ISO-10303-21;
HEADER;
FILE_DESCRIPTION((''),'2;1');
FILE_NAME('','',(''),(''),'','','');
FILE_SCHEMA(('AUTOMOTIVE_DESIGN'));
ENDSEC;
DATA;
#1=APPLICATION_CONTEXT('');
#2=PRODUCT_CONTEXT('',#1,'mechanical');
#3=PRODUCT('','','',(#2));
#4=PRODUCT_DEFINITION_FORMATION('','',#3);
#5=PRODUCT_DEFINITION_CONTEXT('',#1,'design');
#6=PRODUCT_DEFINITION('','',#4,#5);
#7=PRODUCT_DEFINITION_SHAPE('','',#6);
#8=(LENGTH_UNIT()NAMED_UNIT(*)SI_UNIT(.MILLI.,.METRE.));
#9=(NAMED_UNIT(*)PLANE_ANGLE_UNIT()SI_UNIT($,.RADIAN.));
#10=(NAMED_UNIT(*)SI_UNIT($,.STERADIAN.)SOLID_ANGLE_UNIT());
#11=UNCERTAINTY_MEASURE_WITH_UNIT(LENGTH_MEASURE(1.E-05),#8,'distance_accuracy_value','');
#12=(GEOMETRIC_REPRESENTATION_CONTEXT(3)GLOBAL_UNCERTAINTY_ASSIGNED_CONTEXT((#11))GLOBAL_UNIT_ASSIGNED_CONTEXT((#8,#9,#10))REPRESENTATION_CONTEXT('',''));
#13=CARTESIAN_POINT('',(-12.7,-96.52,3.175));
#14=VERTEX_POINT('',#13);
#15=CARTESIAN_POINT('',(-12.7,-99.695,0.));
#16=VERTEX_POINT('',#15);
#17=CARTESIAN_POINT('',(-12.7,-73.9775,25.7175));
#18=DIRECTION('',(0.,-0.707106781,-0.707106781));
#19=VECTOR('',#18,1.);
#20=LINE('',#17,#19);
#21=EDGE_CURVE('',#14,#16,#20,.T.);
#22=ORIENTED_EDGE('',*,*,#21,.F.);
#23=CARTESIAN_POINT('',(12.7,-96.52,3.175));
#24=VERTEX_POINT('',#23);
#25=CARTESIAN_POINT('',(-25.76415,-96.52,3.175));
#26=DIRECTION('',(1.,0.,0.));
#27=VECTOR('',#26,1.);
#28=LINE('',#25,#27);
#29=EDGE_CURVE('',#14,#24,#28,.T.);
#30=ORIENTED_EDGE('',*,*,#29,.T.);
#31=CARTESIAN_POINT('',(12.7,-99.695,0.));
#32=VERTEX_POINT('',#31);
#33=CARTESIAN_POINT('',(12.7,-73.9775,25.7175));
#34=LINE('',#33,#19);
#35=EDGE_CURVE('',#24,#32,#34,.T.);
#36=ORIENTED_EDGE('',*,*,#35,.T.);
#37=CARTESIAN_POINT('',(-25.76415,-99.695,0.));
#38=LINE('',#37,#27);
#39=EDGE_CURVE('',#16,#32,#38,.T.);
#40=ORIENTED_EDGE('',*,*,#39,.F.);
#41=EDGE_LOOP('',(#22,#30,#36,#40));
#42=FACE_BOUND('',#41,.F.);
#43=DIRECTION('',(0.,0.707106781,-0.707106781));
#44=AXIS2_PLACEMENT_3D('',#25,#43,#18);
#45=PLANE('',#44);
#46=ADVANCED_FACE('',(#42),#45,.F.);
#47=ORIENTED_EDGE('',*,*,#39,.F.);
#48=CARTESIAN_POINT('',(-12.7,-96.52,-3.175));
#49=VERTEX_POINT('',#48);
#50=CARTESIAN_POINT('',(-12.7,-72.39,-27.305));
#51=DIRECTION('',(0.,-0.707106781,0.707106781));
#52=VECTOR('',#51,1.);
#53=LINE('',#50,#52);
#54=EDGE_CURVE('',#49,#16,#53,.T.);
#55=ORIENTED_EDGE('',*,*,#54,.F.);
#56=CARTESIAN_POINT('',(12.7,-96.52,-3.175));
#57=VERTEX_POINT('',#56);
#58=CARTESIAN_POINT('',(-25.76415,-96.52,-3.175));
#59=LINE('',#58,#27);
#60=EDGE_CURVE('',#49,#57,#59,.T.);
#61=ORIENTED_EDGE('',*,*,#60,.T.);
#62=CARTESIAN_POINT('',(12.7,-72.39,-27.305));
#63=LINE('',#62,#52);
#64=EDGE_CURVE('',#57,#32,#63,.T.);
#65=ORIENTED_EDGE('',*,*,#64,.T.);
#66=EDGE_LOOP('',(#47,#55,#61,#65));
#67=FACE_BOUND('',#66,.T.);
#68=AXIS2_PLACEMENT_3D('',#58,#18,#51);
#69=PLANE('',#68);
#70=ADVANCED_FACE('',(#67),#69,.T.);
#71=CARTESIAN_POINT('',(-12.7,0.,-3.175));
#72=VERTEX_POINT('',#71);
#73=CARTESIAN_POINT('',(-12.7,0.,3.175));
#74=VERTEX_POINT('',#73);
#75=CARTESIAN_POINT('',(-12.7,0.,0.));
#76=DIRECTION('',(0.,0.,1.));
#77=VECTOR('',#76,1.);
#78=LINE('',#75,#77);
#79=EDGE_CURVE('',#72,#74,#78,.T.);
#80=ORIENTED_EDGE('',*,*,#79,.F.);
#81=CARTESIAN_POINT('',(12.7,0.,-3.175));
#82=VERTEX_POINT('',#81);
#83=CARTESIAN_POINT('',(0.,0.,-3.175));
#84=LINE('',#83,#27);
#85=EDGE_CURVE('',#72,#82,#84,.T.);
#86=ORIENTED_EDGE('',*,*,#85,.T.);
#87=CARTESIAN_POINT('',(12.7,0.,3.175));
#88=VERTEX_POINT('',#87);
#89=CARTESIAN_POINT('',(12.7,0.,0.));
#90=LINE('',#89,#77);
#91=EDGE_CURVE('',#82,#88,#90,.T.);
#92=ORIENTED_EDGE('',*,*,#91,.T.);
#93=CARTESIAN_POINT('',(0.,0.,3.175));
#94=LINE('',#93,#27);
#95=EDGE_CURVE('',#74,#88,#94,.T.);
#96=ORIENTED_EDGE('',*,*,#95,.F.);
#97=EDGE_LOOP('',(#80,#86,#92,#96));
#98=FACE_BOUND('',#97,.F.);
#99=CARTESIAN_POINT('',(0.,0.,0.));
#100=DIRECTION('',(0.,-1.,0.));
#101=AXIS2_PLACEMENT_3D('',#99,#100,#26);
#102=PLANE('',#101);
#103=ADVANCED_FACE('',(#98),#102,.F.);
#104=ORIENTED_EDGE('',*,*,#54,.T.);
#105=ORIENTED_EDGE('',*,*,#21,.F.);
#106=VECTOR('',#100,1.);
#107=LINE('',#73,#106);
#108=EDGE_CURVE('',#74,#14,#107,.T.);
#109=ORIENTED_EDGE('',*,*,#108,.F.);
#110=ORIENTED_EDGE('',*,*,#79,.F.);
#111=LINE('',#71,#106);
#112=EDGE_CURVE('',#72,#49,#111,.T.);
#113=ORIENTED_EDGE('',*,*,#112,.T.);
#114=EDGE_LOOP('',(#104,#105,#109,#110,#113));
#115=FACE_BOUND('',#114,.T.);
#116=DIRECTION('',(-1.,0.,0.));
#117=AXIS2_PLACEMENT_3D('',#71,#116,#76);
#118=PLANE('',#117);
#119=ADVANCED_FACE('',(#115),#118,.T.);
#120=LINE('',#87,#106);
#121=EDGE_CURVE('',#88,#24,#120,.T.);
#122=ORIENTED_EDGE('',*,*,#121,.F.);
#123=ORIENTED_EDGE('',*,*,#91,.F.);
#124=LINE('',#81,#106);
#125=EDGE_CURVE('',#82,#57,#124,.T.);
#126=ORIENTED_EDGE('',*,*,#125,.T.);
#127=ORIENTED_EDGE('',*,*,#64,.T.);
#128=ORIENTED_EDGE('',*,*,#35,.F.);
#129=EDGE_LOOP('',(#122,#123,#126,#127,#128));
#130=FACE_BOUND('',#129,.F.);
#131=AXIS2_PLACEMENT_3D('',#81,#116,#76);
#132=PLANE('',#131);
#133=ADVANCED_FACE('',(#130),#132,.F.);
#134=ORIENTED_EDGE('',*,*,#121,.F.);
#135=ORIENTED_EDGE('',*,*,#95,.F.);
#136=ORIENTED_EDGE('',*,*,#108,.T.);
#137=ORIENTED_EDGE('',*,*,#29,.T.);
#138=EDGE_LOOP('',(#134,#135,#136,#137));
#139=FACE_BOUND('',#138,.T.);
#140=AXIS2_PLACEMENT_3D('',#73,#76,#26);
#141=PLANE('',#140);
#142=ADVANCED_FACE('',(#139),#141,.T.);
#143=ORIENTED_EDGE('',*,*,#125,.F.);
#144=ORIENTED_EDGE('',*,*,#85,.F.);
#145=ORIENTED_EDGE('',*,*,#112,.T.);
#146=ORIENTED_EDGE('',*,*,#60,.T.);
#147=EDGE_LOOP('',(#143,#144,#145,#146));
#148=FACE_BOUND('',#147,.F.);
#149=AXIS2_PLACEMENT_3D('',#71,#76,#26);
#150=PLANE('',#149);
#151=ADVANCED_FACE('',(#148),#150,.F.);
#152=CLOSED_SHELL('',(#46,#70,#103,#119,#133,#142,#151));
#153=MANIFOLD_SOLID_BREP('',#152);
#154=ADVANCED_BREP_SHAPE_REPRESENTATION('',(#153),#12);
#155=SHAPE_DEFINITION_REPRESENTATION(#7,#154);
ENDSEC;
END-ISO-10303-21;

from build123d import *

# Parameters (mm, degrees)
F0_W        = 25.4
F0_H        = 6.35
F1_DEPTH    = 101.6
F2_T1_DEPTH = 51.5282991577


# Not quite as in the source:
# - a fillet or chamfer that OpenCascade refuses, or shapes differently, is made with other operations: its cross-section is extruded or revolved along the edge and cut away or added


with BuildPart() as f1:
    # F0 (on Front) → F1 (new body)
    with BuildSketch(Plane.XZ):
        Rectangle(F0_W, F0_H)
    extrude(amount=F1_DEPTH)

    # F2: chamfer of 5.08 on 2 edges, made by hand

    # F2_s2 → F2_t1 (cut)
    with BuildSketch(Plane.YZ.offset(-25.7641495789)):
        Polygon((-96.52, 3.175), (-101.6, -1.905), (-101.6, 3.175), align=None)
        Polygon((-96.52, -3.175), (-101.6, 1.905), (-101.6, -3.175), align=None)
    extrude(amount=F2_T1_DEPTH, mode=Mode.SUBTRACT)


solid = f1.part
